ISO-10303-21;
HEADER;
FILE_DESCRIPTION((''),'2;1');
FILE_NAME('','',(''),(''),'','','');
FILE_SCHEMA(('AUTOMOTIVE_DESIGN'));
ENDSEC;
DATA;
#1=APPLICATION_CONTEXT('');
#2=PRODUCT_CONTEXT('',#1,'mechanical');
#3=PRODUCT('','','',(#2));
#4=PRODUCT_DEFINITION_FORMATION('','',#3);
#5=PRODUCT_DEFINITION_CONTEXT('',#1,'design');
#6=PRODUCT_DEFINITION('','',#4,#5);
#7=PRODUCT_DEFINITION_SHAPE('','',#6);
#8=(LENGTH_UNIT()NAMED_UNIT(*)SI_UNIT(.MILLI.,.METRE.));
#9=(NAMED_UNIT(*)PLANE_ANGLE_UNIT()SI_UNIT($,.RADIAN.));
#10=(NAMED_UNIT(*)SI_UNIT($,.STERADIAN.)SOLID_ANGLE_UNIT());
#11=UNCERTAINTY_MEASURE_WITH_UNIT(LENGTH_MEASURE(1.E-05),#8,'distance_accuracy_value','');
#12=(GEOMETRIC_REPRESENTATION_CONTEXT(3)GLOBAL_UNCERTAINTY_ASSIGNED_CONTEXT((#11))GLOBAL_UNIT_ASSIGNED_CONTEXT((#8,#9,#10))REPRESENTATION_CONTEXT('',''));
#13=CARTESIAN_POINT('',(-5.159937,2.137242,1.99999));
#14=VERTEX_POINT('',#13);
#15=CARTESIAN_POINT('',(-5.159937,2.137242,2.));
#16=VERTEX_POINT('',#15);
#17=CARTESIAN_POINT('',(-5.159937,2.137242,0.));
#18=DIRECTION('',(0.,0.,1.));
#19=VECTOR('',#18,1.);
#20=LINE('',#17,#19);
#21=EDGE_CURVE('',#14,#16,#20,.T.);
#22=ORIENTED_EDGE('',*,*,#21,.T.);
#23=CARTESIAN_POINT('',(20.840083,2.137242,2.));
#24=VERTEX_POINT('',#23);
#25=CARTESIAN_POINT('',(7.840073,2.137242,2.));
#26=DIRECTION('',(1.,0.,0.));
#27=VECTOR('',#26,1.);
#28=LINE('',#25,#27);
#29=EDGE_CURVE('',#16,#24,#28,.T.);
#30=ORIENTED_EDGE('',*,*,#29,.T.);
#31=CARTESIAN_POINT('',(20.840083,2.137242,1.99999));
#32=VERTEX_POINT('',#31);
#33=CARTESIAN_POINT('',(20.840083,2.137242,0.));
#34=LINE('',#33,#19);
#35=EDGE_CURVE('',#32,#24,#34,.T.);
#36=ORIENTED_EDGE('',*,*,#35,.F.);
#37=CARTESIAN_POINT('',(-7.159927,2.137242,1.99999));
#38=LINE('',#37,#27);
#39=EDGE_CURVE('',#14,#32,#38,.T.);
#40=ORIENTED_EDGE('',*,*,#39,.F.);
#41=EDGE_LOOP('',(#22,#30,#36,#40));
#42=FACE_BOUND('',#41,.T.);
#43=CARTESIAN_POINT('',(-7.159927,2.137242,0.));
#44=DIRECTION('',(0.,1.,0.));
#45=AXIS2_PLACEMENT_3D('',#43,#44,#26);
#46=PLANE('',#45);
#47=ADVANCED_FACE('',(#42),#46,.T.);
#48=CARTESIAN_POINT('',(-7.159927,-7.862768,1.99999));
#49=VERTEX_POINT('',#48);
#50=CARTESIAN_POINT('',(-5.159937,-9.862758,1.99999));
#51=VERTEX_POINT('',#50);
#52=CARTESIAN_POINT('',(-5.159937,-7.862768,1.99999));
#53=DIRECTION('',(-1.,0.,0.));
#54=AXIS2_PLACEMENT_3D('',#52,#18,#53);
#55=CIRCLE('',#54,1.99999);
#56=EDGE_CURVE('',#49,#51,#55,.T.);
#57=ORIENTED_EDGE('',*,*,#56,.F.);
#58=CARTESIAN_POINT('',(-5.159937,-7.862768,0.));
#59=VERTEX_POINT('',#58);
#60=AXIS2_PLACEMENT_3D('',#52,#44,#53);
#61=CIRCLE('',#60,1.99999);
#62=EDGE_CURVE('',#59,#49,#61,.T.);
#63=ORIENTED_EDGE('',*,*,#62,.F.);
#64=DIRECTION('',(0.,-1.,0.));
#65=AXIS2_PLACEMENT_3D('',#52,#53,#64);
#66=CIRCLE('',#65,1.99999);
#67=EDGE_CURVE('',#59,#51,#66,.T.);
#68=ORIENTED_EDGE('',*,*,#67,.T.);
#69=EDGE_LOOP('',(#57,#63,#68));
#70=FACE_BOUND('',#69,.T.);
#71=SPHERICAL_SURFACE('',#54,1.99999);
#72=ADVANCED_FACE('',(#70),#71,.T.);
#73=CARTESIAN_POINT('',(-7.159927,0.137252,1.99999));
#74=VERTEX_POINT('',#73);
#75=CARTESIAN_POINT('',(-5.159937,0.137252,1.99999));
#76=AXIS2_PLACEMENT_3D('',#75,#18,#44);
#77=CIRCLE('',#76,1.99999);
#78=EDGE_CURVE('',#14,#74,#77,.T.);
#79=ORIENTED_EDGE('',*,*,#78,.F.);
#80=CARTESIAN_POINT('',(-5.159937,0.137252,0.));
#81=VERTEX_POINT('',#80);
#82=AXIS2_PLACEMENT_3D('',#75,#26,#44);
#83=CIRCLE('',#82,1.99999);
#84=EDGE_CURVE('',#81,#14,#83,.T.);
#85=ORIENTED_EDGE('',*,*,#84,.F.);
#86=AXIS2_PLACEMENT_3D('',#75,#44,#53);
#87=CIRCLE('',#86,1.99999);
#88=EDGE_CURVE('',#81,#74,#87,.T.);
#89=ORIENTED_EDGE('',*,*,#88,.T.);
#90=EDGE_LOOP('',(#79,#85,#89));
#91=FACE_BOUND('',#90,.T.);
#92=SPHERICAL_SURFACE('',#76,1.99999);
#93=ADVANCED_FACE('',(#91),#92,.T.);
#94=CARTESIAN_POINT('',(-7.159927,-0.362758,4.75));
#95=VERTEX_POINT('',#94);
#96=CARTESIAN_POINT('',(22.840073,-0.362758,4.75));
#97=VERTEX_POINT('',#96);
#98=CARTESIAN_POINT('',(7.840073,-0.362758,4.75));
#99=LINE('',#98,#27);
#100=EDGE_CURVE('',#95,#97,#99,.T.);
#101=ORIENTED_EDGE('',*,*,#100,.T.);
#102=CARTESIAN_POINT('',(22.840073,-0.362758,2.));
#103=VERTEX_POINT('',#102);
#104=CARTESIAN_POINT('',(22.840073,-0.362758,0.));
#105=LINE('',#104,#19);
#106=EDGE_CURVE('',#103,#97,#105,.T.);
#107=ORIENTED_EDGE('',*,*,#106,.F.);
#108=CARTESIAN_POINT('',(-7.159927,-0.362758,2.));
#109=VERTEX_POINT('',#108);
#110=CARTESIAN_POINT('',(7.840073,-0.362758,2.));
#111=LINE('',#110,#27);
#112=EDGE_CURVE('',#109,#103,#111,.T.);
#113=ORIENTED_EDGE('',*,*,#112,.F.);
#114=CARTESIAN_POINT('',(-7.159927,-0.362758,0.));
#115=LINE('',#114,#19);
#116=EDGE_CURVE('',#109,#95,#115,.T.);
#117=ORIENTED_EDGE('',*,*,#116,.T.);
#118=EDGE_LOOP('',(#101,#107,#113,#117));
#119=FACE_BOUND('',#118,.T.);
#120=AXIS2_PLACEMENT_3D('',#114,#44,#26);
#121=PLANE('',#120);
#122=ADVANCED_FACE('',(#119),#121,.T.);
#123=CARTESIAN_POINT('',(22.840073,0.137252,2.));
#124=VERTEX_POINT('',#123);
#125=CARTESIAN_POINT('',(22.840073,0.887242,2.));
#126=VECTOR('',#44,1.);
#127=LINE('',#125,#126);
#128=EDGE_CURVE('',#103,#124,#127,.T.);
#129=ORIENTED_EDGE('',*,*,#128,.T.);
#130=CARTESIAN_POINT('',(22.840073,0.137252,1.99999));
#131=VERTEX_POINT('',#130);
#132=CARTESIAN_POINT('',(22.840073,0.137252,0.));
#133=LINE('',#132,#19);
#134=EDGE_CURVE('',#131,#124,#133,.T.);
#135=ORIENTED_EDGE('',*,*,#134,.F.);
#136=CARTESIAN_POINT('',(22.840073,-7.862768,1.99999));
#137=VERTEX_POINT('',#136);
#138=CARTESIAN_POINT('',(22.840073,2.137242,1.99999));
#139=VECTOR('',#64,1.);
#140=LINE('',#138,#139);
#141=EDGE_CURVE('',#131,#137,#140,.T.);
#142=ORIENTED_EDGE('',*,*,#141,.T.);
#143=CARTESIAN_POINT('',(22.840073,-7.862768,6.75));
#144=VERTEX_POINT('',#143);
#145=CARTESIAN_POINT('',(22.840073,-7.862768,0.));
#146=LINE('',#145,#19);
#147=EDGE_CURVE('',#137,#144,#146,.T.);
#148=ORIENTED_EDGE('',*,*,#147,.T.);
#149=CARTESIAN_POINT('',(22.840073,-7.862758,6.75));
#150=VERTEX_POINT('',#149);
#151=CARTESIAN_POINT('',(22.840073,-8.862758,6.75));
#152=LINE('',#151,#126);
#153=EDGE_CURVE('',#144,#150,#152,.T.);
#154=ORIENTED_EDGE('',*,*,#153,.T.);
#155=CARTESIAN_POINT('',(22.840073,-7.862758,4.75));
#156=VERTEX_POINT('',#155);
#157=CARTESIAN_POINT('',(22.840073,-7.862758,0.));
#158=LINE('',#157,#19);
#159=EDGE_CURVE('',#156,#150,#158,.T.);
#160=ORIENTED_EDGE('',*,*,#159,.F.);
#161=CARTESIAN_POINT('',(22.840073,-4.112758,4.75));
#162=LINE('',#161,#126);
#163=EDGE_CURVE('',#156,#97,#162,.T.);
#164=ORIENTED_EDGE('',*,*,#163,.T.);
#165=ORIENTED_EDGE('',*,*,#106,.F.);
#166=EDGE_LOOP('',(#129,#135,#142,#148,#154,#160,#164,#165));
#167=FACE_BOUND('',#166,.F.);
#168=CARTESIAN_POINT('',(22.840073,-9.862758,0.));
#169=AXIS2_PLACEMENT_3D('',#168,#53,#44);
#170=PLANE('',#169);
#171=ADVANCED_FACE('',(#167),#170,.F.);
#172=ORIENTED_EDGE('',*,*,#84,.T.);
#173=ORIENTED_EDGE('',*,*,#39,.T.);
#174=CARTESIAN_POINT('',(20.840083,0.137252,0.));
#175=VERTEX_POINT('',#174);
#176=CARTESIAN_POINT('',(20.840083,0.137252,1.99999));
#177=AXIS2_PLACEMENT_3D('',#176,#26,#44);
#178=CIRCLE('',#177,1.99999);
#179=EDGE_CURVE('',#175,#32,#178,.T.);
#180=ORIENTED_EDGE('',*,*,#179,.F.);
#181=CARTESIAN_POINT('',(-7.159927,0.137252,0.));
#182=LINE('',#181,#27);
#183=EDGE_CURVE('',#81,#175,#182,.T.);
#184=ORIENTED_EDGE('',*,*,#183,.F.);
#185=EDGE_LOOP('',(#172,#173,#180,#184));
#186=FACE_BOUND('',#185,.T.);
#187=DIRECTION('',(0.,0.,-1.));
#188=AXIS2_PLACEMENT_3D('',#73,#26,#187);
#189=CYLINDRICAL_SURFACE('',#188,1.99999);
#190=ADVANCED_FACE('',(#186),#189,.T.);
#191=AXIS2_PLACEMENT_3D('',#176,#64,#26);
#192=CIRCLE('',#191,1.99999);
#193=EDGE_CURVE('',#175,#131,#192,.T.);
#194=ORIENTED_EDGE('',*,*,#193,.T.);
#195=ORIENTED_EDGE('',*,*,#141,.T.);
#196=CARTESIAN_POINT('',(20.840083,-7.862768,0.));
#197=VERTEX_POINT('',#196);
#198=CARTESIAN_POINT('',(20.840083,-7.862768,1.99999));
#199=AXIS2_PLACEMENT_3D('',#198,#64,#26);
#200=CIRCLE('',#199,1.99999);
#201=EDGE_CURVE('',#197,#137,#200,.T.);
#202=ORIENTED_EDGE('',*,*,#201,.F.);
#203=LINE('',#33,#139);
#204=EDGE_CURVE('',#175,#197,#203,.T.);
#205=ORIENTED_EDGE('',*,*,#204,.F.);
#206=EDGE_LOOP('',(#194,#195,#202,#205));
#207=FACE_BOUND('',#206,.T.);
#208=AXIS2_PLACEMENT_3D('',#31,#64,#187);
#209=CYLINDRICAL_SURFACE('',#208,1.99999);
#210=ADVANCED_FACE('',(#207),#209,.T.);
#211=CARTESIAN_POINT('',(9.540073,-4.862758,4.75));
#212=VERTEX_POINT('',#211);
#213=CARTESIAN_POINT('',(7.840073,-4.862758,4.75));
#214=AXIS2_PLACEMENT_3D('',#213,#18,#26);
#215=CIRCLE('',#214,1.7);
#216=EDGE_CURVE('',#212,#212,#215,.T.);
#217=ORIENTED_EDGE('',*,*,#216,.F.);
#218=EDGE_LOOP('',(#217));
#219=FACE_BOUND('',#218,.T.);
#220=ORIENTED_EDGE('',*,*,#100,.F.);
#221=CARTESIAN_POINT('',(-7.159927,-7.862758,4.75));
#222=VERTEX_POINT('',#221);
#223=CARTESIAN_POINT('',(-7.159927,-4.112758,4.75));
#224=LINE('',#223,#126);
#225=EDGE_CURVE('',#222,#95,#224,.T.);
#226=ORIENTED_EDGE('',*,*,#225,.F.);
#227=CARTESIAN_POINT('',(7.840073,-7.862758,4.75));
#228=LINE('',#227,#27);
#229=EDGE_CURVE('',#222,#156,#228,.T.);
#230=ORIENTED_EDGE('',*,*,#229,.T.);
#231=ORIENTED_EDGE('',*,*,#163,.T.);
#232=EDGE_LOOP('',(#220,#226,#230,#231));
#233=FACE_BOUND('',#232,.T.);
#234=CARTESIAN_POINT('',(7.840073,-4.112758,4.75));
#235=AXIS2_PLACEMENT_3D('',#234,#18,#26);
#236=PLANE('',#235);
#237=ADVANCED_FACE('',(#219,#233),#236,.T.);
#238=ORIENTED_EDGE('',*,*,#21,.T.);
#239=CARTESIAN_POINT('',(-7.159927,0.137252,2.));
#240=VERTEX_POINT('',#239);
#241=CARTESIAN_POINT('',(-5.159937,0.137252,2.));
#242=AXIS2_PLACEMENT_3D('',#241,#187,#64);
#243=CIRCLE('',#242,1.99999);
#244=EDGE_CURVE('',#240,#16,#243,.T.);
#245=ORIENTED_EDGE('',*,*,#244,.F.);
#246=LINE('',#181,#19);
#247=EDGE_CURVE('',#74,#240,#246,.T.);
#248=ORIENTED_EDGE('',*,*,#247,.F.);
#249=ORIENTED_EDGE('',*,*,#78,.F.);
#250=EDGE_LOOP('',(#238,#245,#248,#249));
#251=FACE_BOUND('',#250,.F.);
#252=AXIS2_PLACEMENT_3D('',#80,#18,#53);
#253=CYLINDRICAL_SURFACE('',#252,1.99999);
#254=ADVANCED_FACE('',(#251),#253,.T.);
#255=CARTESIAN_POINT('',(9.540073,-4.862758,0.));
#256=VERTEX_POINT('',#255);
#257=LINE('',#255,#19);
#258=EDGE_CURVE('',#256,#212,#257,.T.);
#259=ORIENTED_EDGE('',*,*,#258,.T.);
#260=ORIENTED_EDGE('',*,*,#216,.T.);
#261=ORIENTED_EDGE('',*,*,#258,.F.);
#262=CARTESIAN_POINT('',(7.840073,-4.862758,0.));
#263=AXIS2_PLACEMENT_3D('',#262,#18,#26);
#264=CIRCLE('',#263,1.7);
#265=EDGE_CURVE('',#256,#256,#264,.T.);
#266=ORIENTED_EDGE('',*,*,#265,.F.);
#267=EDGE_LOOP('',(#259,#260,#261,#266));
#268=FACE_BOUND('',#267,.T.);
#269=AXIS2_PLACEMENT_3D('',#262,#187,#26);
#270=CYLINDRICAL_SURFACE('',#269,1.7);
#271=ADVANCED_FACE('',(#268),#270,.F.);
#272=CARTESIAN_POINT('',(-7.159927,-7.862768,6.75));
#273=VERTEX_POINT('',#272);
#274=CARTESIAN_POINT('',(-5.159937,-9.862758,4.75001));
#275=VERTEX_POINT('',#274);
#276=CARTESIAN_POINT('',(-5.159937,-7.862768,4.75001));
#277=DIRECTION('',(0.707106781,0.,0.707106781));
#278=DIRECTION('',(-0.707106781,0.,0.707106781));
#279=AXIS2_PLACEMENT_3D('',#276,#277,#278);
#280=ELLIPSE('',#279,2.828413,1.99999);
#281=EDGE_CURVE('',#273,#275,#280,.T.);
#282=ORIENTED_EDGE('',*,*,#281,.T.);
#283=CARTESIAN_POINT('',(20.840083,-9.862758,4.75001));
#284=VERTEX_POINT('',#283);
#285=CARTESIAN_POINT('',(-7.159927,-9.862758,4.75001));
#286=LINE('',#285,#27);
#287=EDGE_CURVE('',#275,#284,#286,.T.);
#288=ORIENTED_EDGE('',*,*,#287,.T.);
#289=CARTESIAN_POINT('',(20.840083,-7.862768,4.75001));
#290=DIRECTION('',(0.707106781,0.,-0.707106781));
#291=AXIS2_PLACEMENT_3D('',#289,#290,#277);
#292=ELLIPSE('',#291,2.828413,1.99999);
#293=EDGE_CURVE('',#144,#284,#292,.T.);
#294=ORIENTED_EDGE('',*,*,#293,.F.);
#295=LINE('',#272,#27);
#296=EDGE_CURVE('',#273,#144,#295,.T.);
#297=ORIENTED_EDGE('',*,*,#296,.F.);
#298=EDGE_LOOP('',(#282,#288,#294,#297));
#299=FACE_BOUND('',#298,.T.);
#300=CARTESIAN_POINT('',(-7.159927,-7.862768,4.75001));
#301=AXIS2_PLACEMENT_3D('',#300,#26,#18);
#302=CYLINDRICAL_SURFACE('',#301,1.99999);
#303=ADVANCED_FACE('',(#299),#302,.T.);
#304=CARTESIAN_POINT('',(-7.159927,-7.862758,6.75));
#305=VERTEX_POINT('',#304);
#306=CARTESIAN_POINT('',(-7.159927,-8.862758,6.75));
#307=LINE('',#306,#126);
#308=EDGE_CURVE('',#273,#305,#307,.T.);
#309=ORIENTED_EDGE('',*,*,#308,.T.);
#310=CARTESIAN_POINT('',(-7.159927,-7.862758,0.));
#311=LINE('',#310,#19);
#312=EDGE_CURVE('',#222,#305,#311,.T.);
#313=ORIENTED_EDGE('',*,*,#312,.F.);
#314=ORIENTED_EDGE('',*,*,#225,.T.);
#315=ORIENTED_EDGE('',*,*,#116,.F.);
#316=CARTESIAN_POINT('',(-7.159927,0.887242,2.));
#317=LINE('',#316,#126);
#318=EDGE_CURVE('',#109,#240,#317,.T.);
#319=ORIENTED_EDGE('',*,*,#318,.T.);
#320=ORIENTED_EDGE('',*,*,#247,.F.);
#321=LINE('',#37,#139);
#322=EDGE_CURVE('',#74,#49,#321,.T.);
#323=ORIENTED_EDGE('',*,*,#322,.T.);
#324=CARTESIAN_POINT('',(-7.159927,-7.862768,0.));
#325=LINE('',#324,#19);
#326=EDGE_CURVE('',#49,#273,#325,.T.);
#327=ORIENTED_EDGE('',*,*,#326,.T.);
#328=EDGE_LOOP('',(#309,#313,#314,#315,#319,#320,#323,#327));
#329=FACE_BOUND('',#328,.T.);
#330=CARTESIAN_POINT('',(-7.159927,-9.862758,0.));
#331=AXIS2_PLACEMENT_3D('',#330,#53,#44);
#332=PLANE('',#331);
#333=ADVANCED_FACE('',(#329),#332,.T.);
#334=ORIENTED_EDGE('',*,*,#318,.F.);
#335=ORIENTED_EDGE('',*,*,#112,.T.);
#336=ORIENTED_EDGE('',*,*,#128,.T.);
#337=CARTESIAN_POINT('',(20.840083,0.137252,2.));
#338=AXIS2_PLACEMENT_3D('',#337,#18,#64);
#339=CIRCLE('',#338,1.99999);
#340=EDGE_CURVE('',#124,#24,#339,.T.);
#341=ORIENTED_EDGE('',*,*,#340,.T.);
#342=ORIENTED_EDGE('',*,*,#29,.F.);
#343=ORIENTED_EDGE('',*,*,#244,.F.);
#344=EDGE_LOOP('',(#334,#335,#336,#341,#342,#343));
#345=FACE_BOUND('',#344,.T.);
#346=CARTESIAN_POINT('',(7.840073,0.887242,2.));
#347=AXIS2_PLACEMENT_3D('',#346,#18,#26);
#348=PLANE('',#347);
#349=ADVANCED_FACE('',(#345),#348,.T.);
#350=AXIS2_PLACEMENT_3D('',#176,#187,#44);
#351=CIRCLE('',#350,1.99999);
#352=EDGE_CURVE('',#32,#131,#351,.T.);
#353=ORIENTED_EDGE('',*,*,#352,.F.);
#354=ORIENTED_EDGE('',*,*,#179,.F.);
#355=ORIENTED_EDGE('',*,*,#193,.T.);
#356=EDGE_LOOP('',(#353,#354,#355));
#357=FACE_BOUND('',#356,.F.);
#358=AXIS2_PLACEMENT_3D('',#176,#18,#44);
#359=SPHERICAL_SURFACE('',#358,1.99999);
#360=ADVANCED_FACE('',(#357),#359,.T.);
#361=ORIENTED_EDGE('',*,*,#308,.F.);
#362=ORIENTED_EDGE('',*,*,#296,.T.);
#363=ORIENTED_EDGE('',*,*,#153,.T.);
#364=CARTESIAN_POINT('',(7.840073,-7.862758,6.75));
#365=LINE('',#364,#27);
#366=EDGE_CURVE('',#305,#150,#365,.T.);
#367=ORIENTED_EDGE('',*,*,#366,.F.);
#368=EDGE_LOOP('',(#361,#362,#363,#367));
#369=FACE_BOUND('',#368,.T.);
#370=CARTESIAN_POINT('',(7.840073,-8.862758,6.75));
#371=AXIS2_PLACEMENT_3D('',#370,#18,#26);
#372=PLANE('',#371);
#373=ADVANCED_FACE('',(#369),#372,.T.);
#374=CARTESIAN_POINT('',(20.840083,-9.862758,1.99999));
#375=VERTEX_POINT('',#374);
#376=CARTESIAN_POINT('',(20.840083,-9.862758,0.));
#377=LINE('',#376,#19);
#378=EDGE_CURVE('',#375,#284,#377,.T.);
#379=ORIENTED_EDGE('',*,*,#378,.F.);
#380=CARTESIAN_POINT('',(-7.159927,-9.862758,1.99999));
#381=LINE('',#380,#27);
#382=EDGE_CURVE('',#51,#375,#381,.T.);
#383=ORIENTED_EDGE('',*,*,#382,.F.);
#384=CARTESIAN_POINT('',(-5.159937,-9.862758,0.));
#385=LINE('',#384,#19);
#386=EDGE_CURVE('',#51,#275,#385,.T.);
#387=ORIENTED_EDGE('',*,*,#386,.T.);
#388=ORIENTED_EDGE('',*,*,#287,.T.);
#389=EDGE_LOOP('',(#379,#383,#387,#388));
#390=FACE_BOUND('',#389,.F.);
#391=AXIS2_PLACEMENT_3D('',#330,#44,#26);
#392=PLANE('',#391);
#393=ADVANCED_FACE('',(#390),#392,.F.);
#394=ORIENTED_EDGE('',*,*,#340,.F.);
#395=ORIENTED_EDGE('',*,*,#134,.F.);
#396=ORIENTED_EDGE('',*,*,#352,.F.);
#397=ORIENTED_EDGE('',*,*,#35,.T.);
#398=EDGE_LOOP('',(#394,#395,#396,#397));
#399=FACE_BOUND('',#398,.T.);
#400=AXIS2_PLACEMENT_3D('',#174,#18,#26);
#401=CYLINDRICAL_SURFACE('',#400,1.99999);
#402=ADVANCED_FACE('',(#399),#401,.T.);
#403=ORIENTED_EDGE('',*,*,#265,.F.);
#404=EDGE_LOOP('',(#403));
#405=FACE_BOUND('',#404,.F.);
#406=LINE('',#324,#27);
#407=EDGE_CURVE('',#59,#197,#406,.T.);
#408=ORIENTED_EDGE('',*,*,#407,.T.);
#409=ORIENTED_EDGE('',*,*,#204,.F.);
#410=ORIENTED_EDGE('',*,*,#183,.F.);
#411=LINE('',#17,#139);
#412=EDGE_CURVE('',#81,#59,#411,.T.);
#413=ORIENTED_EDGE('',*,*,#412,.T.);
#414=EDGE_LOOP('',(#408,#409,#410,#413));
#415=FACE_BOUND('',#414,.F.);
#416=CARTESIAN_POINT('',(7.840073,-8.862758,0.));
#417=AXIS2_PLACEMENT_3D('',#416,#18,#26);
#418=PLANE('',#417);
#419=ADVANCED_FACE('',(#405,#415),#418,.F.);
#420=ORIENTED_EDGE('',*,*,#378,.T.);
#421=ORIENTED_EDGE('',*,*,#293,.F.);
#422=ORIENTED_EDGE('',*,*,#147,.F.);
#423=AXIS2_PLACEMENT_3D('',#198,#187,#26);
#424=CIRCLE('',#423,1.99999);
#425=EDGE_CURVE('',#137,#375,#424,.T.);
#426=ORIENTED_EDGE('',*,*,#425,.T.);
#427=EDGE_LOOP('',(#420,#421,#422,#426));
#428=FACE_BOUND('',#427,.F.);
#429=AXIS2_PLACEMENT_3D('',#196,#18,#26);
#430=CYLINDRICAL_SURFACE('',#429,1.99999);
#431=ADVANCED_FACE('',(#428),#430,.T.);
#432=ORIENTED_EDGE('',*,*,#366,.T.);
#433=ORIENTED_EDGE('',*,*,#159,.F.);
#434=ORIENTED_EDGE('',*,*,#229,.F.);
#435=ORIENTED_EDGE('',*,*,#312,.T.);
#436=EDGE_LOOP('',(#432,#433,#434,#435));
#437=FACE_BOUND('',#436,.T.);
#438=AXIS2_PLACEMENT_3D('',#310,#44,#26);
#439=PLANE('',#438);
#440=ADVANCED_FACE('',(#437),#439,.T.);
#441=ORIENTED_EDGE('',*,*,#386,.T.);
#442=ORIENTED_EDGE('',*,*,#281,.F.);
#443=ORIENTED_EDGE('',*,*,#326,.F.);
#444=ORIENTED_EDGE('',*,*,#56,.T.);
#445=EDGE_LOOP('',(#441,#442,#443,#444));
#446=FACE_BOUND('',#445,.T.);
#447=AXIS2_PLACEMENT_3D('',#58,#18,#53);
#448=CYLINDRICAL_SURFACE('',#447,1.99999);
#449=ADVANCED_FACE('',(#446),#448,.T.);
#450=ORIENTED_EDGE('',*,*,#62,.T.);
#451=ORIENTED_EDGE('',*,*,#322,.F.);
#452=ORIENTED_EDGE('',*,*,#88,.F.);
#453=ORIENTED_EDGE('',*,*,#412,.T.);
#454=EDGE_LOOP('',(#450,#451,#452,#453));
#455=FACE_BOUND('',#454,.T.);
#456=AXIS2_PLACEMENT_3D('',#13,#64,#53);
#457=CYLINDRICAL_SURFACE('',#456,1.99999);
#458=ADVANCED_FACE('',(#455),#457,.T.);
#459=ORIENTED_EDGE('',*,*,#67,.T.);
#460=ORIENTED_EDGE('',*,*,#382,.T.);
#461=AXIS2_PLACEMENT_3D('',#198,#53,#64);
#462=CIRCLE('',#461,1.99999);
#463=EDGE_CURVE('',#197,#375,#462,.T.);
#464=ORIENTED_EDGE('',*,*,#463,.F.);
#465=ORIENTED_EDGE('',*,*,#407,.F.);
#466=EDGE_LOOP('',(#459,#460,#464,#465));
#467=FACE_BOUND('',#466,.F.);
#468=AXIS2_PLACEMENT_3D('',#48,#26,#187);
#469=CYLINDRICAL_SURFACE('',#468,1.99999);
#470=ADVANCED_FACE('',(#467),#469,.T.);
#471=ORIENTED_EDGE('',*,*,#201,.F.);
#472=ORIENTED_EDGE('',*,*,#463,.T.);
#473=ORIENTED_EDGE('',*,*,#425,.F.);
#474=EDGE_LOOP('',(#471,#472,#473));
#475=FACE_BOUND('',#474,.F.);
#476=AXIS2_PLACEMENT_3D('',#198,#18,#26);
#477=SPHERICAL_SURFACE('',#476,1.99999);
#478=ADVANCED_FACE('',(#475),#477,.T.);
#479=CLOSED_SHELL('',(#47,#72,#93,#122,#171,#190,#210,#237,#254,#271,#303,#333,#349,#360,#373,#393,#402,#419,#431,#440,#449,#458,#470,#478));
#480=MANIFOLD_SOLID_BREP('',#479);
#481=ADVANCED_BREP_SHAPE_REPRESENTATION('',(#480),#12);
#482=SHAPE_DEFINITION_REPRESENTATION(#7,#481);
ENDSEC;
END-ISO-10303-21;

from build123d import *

# Parameters (mm, degrees)
F0_W     = 30
F0_H     = 2.5
F1_DEPTH = 2
F0_H_2   = 7.5
F0_R     = 1.7
F2_DEPTH = 4.75
F0_H_3   = 2
F3_DEPTH = 6.75
F4_R     = 1.99999


# Not quite as in the source:
# - a fillet or chamfer is up to 0.001 mm smaller than in the source, because OpenCascade refuses the exact size


with BuildPart() as f1:
    # F0 (on Top) → F1 (new body)
    with BuildSketch(Plane.XY):
        with Locations((7.8400733322, 0.8872417808)):
            Rectangle(F0_W, F0_H)
    extrude(amount=F1_DEPTH)

    # F0 (on Top) → F2 (join)
    with BuildSketch(Plane.XY):
        with Locations((7.8400733322, -4.1127582192)):
            Rectangle(F0_W, F0_H_2)
        with Locations((7.8400733322, -4.8627582192)):
            Circle(F0_R, mode=Mode.SUBTRACT)
    extrude(amount=F2_DEPTH)

    # F0 (on Top) → F3 (join)
    with BuildSketch(Plane.XY):
        with Locations((7.8400733322, -8.8627582192)):
            Rectangle(F0_W, F0_H_3)
    extrude(amount=F3_DEPTH)

    # F4 (radius 2 in the source; OpenCascade refuses exactly that, so slightly less here)
    f4_edges = [f1.edges().sort_by_distance(p)[0] for p in [
        (-7.159927, 2.137242, 1),
        (22.840073, 2.137242, 1),
        (-7.159927, -9.862758, 3.375),
        (22.840073, -9.862758, 3.375),
        (7.840073, 2.137242, 0),
        (22.840073, -3.862758, 0),
        (-7.159927, -3.862758, 0),
        (7.840073, -9.862758, 0),
        (7.840073, -9.862758, 6.75),
    ]]
    fillet(f4_edges, radius=F4_R)


solid = f1.part
